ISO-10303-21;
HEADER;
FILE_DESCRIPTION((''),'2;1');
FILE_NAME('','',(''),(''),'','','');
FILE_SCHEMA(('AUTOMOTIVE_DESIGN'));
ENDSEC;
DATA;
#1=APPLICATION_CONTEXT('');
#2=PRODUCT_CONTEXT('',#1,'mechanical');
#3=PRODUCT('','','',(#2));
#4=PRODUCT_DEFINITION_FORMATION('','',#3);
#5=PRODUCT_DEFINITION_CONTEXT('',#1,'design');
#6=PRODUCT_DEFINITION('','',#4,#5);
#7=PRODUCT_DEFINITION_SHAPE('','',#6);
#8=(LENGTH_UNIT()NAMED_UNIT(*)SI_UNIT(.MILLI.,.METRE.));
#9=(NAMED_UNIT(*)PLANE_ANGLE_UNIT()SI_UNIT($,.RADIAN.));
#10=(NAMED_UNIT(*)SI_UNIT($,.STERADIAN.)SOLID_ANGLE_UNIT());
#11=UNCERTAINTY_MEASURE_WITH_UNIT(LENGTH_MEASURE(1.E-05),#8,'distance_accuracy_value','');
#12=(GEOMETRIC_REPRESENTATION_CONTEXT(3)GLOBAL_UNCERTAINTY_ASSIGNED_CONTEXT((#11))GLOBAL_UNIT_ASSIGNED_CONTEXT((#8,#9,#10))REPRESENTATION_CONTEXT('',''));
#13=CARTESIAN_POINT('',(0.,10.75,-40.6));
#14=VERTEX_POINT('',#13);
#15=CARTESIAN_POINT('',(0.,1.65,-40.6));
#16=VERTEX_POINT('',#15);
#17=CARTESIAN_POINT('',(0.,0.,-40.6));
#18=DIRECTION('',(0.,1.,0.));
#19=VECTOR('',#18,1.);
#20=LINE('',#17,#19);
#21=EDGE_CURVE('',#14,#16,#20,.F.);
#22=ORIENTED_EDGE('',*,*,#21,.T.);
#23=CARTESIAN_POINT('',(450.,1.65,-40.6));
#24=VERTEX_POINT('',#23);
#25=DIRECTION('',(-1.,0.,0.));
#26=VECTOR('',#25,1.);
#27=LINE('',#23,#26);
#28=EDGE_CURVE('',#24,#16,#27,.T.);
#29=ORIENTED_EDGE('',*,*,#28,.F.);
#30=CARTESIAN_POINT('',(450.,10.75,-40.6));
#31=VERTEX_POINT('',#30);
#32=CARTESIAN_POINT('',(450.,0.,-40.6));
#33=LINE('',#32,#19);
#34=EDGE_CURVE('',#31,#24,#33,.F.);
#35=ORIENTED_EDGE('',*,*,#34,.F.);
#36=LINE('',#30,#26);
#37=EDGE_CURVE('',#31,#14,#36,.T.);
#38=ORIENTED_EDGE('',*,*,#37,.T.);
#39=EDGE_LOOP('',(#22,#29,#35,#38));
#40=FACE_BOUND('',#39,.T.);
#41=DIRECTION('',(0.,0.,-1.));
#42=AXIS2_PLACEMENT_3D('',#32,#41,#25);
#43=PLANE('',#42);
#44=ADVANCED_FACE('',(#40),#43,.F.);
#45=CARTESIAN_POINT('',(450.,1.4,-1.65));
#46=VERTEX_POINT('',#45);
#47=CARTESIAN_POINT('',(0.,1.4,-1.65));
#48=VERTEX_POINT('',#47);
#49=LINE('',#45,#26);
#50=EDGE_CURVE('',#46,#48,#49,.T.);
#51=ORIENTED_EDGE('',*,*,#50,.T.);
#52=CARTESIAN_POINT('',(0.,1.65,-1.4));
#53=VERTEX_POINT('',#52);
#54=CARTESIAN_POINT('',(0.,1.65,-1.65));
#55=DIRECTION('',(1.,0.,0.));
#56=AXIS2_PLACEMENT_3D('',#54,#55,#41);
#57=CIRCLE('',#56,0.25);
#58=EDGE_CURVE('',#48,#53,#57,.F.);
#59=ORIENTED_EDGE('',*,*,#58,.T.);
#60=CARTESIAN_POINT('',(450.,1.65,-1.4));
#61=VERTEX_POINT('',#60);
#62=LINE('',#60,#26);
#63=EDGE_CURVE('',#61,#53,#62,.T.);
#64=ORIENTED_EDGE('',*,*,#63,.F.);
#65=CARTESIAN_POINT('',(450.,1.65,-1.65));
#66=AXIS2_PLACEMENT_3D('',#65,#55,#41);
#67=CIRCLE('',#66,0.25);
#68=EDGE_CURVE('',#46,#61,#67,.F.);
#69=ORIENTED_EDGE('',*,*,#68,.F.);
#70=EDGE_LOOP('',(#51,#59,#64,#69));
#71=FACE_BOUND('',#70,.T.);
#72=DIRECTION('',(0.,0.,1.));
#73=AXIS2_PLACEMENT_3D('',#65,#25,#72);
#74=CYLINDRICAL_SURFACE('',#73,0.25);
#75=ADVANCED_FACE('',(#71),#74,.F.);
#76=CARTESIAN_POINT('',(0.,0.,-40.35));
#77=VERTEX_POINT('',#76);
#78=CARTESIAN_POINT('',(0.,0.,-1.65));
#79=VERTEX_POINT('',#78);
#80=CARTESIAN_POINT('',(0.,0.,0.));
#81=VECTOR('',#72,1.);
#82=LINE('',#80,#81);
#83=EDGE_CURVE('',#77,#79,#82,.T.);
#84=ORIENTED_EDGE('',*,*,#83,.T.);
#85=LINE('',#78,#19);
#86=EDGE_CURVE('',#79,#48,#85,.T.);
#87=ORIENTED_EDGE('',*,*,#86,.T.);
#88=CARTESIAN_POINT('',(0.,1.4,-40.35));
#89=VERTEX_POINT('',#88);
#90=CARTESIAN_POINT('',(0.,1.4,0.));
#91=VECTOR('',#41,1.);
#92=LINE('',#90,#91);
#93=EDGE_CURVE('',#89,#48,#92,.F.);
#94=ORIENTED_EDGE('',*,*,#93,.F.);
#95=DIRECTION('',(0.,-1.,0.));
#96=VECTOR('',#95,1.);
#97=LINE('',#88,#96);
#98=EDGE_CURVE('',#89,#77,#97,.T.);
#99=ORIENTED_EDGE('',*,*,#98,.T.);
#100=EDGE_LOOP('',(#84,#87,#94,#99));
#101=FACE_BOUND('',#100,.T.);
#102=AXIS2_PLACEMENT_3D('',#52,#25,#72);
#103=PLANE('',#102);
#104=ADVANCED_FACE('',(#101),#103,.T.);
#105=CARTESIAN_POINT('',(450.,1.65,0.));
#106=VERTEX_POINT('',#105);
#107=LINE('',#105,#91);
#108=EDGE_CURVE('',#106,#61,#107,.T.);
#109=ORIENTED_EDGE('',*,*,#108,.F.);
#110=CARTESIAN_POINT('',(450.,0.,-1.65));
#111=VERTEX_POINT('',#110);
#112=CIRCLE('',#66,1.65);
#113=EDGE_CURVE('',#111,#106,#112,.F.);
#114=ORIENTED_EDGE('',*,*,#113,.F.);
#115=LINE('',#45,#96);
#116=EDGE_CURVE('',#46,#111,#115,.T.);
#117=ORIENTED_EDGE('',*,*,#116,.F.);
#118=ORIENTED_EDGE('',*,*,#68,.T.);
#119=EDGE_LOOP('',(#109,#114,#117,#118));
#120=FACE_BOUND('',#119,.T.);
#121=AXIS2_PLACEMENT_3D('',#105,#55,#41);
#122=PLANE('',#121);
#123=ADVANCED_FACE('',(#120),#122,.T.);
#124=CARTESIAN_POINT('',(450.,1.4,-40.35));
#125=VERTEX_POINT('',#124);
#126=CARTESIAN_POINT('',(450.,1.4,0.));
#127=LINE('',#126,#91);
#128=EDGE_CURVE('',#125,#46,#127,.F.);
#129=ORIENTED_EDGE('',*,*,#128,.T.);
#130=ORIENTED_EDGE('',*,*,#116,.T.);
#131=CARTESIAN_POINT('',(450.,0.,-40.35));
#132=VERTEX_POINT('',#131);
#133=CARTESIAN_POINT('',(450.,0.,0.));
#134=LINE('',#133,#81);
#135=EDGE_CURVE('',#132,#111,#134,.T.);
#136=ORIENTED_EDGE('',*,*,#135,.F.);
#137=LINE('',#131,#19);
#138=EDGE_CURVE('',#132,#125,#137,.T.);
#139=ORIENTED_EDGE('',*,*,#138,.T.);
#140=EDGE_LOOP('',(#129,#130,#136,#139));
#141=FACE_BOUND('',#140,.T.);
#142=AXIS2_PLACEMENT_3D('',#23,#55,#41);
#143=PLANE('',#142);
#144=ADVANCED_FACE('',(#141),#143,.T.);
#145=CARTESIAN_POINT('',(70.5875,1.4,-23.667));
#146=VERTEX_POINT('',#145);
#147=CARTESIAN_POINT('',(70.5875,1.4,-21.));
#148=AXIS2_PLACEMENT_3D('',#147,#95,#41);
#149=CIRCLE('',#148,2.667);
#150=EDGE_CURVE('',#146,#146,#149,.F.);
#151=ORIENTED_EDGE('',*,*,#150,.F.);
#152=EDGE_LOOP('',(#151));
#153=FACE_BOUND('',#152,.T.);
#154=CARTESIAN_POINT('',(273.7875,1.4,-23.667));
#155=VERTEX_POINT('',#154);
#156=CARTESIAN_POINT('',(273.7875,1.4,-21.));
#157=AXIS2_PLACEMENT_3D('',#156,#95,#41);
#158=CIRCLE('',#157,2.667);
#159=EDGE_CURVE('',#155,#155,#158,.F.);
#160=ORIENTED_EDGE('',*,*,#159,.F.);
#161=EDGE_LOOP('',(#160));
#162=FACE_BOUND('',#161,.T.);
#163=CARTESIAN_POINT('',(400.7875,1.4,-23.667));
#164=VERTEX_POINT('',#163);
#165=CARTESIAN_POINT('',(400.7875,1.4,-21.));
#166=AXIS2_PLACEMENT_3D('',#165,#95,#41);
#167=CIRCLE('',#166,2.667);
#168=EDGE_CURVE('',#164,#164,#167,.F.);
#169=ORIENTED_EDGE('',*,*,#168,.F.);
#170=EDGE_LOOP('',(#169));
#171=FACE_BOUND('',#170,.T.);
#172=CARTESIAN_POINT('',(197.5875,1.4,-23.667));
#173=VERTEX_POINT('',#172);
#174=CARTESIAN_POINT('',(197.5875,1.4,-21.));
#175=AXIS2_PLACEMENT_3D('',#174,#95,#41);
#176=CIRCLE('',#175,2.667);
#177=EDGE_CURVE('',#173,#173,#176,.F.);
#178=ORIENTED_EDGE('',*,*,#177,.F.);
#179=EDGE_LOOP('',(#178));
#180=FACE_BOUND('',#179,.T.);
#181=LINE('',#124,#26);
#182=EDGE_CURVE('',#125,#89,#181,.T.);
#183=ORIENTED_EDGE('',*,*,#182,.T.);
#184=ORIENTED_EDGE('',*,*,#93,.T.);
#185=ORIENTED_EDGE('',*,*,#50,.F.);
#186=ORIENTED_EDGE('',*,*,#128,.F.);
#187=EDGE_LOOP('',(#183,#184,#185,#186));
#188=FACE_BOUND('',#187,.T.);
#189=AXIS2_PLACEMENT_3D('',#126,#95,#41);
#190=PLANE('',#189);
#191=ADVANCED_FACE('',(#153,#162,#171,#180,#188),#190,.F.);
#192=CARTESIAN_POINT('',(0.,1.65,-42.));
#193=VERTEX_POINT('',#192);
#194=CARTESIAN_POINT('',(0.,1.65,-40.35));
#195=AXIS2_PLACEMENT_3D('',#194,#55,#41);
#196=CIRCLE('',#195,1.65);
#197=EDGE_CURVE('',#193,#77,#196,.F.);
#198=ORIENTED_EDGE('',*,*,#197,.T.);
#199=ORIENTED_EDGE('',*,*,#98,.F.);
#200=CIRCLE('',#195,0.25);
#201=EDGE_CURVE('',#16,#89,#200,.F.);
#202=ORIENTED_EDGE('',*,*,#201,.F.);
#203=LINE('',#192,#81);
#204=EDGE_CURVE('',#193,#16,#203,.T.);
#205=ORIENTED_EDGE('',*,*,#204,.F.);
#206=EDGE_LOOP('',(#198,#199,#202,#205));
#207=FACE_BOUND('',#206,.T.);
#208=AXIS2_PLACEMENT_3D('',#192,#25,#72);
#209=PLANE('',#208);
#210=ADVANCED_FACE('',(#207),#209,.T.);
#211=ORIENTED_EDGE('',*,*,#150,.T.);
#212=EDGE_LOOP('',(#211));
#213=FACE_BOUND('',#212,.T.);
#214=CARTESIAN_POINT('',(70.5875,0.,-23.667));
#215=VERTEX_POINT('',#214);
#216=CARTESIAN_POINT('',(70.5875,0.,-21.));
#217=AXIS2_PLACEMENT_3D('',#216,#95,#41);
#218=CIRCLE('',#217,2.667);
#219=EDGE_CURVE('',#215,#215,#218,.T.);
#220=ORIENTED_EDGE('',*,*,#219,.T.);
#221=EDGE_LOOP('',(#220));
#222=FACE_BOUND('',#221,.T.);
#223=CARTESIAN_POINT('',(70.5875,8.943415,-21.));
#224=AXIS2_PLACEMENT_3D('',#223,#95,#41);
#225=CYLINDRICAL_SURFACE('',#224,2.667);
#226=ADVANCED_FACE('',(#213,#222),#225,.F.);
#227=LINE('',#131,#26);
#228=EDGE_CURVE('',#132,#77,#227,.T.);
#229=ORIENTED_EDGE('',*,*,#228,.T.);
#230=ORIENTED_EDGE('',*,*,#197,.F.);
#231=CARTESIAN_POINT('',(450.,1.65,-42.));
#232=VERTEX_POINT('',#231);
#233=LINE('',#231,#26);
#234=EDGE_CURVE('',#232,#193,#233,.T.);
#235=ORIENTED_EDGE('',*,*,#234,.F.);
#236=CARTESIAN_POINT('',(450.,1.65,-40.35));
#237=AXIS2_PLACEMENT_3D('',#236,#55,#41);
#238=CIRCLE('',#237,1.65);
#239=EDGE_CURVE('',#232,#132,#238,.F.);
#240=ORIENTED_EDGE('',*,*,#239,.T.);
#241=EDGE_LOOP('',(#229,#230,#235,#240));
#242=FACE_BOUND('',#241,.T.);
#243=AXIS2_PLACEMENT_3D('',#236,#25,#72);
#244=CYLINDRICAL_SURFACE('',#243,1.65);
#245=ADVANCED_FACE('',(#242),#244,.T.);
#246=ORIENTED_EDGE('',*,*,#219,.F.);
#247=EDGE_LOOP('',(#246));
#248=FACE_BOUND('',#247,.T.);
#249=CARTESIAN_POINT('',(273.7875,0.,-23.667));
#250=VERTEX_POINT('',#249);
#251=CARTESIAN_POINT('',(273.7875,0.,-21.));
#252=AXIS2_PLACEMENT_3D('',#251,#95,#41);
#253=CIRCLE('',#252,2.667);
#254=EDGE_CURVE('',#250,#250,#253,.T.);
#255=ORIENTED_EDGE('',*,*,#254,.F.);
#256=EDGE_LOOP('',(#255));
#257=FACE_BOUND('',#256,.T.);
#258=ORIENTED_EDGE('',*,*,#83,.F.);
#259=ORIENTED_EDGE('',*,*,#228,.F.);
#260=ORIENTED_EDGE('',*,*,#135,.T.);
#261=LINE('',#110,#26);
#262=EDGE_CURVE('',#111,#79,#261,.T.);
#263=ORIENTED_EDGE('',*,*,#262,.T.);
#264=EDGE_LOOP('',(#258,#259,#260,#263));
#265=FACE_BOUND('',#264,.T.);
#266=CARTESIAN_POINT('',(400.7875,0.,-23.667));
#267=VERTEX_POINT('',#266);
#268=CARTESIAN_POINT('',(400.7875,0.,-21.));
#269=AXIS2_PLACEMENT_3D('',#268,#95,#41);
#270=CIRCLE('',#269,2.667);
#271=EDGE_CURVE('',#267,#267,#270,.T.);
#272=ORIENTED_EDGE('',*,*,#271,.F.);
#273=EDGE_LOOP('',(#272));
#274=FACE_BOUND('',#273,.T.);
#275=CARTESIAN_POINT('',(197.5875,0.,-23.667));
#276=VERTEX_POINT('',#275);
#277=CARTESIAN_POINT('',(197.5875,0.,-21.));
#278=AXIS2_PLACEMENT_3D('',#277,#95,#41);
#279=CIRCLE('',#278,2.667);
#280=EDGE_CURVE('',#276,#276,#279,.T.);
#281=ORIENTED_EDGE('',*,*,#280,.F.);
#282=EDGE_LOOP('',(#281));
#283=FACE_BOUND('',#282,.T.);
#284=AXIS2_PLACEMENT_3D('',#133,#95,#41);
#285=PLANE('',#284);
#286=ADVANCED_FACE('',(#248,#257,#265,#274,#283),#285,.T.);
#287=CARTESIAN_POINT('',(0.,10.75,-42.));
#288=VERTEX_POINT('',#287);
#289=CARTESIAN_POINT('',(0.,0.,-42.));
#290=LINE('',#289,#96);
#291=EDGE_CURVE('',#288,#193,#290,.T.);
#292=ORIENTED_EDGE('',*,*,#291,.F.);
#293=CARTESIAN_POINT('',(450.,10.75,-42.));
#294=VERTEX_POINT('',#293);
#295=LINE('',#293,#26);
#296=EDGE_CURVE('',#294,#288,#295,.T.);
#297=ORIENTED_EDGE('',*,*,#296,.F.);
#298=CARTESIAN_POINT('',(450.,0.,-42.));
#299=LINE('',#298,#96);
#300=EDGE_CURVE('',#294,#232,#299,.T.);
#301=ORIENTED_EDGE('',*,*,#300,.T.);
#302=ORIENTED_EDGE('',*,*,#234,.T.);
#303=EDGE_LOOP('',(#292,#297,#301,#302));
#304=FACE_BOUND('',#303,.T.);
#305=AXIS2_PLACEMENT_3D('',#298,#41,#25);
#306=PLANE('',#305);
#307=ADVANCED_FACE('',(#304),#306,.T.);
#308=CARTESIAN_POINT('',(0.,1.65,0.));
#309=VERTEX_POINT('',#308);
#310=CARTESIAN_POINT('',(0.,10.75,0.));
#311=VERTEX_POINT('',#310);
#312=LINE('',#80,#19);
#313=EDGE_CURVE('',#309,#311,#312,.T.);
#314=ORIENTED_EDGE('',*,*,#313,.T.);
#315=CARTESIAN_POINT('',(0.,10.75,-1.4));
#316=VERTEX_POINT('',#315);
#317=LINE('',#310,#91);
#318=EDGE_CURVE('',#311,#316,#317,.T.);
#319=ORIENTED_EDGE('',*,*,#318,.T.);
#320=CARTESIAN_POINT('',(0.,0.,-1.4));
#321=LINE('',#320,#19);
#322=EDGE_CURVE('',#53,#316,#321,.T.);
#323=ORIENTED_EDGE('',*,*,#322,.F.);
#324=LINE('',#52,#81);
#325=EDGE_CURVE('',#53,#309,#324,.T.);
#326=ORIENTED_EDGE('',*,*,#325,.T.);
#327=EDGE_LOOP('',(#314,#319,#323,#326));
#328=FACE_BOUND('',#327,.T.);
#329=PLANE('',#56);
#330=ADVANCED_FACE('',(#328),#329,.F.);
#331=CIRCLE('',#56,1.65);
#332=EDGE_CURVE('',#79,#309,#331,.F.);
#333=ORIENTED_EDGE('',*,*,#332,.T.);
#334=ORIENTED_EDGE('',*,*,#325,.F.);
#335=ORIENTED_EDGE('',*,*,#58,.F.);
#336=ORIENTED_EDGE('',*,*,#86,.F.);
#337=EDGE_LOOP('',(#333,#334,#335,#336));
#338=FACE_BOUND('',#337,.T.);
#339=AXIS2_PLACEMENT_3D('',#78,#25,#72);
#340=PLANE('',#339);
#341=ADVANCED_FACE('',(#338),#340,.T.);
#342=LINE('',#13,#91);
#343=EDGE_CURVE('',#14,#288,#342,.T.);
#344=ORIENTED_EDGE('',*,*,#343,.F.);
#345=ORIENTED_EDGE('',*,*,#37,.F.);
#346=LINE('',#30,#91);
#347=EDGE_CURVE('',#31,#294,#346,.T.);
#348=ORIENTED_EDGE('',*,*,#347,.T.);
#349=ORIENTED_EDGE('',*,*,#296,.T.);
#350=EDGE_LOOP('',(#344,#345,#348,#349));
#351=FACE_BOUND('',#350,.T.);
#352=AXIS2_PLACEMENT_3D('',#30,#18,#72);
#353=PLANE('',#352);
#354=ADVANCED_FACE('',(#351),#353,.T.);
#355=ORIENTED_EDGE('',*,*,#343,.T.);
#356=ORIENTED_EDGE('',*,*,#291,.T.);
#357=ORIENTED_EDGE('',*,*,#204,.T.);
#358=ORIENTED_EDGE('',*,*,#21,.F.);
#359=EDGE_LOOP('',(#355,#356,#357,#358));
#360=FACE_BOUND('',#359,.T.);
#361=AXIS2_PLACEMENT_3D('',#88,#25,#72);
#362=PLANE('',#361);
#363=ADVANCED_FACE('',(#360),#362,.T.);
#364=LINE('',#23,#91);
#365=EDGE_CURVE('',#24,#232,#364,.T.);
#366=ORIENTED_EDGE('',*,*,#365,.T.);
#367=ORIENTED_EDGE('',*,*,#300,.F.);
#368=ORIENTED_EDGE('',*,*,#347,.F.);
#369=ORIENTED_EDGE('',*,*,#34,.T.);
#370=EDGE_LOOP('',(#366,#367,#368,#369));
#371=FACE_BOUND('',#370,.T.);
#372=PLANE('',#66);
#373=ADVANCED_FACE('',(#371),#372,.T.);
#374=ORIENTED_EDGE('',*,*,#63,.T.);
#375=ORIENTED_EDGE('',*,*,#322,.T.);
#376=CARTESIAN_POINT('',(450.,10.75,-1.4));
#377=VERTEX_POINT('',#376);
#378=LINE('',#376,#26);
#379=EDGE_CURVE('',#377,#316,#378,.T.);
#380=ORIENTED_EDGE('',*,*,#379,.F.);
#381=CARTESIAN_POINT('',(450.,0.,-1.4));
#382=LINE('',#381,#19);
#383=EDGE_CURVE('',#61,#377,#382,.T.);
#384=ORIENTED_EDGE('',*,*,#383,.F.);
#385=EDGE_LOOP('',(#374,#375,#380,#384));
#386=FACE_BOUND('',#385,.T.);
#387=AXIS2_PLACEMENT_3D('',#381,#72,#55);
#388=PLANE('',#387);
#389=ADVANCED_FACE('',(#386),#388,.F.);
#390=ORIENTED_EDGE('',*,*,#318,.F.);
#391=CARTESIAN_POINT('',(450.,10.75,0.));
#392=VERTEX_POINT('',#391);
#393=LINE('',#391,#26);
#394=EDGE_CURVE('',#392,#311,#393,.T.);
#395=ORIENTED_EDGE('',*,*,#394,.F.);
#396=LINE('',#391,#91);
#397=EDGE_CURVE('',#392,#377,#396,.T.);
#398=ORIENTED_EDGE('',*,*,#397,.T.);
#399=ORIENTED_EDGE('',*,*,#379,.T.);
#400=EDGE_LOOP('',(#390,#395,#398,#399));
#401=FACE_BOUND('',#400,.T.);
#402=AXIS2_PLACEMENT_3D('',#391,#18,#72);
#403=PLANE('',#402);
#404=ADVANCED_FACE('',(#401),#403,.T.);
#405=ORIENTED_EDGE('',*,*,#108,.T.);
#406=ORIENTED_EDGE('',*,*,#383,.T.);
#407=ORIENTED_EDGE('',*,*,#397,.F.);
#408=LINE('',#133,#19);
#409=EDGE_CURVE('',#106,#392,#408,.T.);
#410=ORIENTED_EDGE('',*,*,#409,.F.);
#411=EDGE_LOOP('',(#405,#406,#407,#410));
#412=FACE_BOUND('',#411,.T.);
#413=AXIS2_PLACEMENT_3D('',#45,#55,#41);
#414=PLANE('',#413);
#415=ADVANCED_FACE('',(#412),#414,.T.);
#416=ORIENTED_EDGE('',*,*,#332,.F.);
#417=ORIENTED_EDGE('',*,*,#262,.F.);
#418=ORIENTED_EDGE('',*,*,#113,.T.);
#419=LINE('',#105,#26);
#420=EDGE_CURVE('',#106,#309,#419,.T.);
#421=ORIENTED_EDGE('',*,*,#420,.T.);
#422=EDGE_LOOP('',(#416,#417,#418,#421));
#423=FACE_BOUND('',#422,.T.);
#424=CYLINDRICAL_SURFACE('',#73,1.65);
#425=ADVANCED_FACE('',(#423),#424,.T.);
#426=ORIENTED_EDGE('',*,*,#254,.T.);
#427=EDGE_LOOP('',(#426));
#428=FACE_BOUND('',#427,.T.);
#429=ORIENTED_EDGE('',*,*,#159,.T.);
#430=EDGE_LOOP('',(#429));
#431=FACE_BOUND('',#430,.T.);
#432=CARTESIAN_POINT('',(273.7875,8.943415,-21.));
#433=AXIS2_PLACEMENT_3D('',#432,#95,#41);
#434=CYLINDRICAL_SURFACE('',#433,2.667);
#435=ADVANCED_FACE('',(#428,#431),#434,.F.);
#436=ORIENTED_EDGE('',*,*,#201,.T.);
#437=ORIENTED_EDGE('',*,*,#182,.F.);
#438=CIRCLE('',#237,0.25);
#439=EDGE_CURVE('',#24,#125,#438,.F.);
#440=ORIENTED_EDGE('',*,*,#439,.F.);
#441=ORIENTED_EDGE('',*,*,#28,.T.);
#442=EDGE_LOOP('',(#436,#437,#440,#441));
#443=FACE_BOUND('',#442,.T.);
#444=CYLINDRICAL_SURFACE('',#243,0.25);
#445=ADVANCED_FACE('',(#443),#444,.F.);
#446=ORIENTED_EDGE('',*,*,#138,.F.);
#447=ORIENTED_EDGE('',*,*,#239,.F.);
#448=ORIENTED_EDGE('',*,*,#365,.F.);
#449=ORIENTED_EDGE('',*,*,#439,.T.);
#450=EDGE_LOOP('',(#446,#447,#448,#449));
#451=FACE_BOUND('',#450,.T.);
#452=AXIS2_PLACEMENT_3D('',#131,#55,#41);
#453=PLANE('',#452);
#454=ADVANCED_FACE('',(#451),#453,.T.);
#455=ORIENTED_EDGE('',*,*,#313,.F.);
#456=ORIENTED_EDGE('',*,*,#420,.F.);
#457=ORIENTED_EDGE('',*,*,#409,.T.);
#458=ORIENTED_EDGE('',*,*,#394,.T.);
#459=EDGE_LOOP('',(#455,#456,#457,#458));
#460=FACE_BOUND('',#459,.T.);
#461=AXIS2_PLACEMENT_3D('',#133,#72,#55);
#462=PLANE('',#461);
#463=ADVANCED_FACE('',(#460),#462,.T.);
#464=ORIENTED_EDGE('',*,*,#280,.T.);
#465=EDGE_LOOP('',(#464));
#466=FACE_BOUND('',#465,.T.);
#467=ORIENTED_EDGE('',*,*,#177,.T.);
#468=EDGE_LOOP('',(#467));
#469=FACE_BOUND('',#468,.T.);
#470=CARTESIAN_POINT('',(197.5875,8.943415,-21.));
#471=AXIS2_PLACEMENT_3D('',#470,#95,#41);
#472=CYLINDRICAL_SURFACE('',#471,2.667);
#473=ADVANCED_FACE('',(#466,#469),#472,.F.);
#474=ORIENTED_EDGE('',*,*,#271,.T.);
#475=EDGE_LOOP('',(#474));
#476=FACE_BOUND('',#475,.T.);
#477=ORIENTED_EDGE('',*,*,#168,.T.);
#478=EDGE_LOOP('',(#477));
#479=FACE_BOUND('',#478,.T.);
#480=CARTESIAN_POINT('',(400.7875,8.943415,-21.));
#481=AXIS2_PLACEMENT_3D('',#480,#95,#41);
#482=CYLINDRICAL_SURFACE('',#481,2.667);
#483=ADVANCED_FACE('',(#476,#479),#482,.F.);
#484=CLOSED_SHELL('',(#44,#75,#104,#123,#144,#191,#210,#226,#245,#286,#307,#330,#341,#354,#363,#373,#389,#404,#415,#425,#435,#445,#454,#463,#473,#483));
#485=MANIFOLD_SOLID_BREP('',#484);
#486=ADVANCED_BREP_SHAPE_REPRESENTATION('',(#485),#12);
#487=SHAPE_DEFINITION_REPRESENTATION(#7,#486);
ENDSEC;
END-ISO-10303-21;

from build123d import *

# Parameters (mm, degrees)
BASE_FLANGE1_DEPTH = 450
SKETCH6_R          = 2.667
CUT_EXTRUDE1_DEPTH = 1.4


# Sheet-metal steps are written as plain solids
with BuildPart() as part:
    # Sketch1 → Base-Flange1 (new body)
    with BuildSketch(Plane(origin=(0, 0, 0), x_dir=(0, 0, -1), z_dir=(1, 0, 0))):
        with BuildLine():
            Line((0, 10.75), (0, 1.65))
            ThreePointArc((0, 1.65), (0.483273811, 0.483273811), (1.65, 0))
            Line((1.65, 0), (40.35, 0))
            ThreePointArc((40.35, 0), (41.516726189, 0.483273811), (42, 1.65))
            Line((42, 1.65), (42, 10.75))
            Line((42, 10.75), (40.6, 10.75))
            Line((40.6, 10.75), (40.6, 1.65))
            ThreePointArc((40.6, 1.65), (40.526776695, 1.473223305), (40.35, 1.4))
            Line((40.35, 1.4), (1.65, 1.4))
            ThreePointArc((1.65, 1.4), (1.473223305, 1.473223305), (1.4, 1.65))
            Line((1.4, 1.65), (1.4, 10.75))
            Line((1.4, 10.75), (0, 10.75))
        make_face()
    extrude(amount=BASE_FLANGE1_DEPTH)

    # Sketch6 → Cut-Extrude1 (cut)
    with BuildSketch(Plane.XZ):
        with Locations(Location((400.7875, -21, 0), (0, 0, 270))):
            Circle(SKETCH6_R)
        with Locations(Location((273.7875, -21, 0), (0, 0, 270))):
            Circle(SKETCH6_R)
        with Locations(Location((197.5875, -21, 0), (0, 0, 270))):
            Circle(SKETCH6_R)
        with Locations(Location((70.5875, -21, 0), (0, 0, 270))):
            Circle(SKETCH6_R)
    extrude(amount=-CUT_EXTRUDE1_DEPTH, mode=Mode.SUBTRACT)


solid = part.part
